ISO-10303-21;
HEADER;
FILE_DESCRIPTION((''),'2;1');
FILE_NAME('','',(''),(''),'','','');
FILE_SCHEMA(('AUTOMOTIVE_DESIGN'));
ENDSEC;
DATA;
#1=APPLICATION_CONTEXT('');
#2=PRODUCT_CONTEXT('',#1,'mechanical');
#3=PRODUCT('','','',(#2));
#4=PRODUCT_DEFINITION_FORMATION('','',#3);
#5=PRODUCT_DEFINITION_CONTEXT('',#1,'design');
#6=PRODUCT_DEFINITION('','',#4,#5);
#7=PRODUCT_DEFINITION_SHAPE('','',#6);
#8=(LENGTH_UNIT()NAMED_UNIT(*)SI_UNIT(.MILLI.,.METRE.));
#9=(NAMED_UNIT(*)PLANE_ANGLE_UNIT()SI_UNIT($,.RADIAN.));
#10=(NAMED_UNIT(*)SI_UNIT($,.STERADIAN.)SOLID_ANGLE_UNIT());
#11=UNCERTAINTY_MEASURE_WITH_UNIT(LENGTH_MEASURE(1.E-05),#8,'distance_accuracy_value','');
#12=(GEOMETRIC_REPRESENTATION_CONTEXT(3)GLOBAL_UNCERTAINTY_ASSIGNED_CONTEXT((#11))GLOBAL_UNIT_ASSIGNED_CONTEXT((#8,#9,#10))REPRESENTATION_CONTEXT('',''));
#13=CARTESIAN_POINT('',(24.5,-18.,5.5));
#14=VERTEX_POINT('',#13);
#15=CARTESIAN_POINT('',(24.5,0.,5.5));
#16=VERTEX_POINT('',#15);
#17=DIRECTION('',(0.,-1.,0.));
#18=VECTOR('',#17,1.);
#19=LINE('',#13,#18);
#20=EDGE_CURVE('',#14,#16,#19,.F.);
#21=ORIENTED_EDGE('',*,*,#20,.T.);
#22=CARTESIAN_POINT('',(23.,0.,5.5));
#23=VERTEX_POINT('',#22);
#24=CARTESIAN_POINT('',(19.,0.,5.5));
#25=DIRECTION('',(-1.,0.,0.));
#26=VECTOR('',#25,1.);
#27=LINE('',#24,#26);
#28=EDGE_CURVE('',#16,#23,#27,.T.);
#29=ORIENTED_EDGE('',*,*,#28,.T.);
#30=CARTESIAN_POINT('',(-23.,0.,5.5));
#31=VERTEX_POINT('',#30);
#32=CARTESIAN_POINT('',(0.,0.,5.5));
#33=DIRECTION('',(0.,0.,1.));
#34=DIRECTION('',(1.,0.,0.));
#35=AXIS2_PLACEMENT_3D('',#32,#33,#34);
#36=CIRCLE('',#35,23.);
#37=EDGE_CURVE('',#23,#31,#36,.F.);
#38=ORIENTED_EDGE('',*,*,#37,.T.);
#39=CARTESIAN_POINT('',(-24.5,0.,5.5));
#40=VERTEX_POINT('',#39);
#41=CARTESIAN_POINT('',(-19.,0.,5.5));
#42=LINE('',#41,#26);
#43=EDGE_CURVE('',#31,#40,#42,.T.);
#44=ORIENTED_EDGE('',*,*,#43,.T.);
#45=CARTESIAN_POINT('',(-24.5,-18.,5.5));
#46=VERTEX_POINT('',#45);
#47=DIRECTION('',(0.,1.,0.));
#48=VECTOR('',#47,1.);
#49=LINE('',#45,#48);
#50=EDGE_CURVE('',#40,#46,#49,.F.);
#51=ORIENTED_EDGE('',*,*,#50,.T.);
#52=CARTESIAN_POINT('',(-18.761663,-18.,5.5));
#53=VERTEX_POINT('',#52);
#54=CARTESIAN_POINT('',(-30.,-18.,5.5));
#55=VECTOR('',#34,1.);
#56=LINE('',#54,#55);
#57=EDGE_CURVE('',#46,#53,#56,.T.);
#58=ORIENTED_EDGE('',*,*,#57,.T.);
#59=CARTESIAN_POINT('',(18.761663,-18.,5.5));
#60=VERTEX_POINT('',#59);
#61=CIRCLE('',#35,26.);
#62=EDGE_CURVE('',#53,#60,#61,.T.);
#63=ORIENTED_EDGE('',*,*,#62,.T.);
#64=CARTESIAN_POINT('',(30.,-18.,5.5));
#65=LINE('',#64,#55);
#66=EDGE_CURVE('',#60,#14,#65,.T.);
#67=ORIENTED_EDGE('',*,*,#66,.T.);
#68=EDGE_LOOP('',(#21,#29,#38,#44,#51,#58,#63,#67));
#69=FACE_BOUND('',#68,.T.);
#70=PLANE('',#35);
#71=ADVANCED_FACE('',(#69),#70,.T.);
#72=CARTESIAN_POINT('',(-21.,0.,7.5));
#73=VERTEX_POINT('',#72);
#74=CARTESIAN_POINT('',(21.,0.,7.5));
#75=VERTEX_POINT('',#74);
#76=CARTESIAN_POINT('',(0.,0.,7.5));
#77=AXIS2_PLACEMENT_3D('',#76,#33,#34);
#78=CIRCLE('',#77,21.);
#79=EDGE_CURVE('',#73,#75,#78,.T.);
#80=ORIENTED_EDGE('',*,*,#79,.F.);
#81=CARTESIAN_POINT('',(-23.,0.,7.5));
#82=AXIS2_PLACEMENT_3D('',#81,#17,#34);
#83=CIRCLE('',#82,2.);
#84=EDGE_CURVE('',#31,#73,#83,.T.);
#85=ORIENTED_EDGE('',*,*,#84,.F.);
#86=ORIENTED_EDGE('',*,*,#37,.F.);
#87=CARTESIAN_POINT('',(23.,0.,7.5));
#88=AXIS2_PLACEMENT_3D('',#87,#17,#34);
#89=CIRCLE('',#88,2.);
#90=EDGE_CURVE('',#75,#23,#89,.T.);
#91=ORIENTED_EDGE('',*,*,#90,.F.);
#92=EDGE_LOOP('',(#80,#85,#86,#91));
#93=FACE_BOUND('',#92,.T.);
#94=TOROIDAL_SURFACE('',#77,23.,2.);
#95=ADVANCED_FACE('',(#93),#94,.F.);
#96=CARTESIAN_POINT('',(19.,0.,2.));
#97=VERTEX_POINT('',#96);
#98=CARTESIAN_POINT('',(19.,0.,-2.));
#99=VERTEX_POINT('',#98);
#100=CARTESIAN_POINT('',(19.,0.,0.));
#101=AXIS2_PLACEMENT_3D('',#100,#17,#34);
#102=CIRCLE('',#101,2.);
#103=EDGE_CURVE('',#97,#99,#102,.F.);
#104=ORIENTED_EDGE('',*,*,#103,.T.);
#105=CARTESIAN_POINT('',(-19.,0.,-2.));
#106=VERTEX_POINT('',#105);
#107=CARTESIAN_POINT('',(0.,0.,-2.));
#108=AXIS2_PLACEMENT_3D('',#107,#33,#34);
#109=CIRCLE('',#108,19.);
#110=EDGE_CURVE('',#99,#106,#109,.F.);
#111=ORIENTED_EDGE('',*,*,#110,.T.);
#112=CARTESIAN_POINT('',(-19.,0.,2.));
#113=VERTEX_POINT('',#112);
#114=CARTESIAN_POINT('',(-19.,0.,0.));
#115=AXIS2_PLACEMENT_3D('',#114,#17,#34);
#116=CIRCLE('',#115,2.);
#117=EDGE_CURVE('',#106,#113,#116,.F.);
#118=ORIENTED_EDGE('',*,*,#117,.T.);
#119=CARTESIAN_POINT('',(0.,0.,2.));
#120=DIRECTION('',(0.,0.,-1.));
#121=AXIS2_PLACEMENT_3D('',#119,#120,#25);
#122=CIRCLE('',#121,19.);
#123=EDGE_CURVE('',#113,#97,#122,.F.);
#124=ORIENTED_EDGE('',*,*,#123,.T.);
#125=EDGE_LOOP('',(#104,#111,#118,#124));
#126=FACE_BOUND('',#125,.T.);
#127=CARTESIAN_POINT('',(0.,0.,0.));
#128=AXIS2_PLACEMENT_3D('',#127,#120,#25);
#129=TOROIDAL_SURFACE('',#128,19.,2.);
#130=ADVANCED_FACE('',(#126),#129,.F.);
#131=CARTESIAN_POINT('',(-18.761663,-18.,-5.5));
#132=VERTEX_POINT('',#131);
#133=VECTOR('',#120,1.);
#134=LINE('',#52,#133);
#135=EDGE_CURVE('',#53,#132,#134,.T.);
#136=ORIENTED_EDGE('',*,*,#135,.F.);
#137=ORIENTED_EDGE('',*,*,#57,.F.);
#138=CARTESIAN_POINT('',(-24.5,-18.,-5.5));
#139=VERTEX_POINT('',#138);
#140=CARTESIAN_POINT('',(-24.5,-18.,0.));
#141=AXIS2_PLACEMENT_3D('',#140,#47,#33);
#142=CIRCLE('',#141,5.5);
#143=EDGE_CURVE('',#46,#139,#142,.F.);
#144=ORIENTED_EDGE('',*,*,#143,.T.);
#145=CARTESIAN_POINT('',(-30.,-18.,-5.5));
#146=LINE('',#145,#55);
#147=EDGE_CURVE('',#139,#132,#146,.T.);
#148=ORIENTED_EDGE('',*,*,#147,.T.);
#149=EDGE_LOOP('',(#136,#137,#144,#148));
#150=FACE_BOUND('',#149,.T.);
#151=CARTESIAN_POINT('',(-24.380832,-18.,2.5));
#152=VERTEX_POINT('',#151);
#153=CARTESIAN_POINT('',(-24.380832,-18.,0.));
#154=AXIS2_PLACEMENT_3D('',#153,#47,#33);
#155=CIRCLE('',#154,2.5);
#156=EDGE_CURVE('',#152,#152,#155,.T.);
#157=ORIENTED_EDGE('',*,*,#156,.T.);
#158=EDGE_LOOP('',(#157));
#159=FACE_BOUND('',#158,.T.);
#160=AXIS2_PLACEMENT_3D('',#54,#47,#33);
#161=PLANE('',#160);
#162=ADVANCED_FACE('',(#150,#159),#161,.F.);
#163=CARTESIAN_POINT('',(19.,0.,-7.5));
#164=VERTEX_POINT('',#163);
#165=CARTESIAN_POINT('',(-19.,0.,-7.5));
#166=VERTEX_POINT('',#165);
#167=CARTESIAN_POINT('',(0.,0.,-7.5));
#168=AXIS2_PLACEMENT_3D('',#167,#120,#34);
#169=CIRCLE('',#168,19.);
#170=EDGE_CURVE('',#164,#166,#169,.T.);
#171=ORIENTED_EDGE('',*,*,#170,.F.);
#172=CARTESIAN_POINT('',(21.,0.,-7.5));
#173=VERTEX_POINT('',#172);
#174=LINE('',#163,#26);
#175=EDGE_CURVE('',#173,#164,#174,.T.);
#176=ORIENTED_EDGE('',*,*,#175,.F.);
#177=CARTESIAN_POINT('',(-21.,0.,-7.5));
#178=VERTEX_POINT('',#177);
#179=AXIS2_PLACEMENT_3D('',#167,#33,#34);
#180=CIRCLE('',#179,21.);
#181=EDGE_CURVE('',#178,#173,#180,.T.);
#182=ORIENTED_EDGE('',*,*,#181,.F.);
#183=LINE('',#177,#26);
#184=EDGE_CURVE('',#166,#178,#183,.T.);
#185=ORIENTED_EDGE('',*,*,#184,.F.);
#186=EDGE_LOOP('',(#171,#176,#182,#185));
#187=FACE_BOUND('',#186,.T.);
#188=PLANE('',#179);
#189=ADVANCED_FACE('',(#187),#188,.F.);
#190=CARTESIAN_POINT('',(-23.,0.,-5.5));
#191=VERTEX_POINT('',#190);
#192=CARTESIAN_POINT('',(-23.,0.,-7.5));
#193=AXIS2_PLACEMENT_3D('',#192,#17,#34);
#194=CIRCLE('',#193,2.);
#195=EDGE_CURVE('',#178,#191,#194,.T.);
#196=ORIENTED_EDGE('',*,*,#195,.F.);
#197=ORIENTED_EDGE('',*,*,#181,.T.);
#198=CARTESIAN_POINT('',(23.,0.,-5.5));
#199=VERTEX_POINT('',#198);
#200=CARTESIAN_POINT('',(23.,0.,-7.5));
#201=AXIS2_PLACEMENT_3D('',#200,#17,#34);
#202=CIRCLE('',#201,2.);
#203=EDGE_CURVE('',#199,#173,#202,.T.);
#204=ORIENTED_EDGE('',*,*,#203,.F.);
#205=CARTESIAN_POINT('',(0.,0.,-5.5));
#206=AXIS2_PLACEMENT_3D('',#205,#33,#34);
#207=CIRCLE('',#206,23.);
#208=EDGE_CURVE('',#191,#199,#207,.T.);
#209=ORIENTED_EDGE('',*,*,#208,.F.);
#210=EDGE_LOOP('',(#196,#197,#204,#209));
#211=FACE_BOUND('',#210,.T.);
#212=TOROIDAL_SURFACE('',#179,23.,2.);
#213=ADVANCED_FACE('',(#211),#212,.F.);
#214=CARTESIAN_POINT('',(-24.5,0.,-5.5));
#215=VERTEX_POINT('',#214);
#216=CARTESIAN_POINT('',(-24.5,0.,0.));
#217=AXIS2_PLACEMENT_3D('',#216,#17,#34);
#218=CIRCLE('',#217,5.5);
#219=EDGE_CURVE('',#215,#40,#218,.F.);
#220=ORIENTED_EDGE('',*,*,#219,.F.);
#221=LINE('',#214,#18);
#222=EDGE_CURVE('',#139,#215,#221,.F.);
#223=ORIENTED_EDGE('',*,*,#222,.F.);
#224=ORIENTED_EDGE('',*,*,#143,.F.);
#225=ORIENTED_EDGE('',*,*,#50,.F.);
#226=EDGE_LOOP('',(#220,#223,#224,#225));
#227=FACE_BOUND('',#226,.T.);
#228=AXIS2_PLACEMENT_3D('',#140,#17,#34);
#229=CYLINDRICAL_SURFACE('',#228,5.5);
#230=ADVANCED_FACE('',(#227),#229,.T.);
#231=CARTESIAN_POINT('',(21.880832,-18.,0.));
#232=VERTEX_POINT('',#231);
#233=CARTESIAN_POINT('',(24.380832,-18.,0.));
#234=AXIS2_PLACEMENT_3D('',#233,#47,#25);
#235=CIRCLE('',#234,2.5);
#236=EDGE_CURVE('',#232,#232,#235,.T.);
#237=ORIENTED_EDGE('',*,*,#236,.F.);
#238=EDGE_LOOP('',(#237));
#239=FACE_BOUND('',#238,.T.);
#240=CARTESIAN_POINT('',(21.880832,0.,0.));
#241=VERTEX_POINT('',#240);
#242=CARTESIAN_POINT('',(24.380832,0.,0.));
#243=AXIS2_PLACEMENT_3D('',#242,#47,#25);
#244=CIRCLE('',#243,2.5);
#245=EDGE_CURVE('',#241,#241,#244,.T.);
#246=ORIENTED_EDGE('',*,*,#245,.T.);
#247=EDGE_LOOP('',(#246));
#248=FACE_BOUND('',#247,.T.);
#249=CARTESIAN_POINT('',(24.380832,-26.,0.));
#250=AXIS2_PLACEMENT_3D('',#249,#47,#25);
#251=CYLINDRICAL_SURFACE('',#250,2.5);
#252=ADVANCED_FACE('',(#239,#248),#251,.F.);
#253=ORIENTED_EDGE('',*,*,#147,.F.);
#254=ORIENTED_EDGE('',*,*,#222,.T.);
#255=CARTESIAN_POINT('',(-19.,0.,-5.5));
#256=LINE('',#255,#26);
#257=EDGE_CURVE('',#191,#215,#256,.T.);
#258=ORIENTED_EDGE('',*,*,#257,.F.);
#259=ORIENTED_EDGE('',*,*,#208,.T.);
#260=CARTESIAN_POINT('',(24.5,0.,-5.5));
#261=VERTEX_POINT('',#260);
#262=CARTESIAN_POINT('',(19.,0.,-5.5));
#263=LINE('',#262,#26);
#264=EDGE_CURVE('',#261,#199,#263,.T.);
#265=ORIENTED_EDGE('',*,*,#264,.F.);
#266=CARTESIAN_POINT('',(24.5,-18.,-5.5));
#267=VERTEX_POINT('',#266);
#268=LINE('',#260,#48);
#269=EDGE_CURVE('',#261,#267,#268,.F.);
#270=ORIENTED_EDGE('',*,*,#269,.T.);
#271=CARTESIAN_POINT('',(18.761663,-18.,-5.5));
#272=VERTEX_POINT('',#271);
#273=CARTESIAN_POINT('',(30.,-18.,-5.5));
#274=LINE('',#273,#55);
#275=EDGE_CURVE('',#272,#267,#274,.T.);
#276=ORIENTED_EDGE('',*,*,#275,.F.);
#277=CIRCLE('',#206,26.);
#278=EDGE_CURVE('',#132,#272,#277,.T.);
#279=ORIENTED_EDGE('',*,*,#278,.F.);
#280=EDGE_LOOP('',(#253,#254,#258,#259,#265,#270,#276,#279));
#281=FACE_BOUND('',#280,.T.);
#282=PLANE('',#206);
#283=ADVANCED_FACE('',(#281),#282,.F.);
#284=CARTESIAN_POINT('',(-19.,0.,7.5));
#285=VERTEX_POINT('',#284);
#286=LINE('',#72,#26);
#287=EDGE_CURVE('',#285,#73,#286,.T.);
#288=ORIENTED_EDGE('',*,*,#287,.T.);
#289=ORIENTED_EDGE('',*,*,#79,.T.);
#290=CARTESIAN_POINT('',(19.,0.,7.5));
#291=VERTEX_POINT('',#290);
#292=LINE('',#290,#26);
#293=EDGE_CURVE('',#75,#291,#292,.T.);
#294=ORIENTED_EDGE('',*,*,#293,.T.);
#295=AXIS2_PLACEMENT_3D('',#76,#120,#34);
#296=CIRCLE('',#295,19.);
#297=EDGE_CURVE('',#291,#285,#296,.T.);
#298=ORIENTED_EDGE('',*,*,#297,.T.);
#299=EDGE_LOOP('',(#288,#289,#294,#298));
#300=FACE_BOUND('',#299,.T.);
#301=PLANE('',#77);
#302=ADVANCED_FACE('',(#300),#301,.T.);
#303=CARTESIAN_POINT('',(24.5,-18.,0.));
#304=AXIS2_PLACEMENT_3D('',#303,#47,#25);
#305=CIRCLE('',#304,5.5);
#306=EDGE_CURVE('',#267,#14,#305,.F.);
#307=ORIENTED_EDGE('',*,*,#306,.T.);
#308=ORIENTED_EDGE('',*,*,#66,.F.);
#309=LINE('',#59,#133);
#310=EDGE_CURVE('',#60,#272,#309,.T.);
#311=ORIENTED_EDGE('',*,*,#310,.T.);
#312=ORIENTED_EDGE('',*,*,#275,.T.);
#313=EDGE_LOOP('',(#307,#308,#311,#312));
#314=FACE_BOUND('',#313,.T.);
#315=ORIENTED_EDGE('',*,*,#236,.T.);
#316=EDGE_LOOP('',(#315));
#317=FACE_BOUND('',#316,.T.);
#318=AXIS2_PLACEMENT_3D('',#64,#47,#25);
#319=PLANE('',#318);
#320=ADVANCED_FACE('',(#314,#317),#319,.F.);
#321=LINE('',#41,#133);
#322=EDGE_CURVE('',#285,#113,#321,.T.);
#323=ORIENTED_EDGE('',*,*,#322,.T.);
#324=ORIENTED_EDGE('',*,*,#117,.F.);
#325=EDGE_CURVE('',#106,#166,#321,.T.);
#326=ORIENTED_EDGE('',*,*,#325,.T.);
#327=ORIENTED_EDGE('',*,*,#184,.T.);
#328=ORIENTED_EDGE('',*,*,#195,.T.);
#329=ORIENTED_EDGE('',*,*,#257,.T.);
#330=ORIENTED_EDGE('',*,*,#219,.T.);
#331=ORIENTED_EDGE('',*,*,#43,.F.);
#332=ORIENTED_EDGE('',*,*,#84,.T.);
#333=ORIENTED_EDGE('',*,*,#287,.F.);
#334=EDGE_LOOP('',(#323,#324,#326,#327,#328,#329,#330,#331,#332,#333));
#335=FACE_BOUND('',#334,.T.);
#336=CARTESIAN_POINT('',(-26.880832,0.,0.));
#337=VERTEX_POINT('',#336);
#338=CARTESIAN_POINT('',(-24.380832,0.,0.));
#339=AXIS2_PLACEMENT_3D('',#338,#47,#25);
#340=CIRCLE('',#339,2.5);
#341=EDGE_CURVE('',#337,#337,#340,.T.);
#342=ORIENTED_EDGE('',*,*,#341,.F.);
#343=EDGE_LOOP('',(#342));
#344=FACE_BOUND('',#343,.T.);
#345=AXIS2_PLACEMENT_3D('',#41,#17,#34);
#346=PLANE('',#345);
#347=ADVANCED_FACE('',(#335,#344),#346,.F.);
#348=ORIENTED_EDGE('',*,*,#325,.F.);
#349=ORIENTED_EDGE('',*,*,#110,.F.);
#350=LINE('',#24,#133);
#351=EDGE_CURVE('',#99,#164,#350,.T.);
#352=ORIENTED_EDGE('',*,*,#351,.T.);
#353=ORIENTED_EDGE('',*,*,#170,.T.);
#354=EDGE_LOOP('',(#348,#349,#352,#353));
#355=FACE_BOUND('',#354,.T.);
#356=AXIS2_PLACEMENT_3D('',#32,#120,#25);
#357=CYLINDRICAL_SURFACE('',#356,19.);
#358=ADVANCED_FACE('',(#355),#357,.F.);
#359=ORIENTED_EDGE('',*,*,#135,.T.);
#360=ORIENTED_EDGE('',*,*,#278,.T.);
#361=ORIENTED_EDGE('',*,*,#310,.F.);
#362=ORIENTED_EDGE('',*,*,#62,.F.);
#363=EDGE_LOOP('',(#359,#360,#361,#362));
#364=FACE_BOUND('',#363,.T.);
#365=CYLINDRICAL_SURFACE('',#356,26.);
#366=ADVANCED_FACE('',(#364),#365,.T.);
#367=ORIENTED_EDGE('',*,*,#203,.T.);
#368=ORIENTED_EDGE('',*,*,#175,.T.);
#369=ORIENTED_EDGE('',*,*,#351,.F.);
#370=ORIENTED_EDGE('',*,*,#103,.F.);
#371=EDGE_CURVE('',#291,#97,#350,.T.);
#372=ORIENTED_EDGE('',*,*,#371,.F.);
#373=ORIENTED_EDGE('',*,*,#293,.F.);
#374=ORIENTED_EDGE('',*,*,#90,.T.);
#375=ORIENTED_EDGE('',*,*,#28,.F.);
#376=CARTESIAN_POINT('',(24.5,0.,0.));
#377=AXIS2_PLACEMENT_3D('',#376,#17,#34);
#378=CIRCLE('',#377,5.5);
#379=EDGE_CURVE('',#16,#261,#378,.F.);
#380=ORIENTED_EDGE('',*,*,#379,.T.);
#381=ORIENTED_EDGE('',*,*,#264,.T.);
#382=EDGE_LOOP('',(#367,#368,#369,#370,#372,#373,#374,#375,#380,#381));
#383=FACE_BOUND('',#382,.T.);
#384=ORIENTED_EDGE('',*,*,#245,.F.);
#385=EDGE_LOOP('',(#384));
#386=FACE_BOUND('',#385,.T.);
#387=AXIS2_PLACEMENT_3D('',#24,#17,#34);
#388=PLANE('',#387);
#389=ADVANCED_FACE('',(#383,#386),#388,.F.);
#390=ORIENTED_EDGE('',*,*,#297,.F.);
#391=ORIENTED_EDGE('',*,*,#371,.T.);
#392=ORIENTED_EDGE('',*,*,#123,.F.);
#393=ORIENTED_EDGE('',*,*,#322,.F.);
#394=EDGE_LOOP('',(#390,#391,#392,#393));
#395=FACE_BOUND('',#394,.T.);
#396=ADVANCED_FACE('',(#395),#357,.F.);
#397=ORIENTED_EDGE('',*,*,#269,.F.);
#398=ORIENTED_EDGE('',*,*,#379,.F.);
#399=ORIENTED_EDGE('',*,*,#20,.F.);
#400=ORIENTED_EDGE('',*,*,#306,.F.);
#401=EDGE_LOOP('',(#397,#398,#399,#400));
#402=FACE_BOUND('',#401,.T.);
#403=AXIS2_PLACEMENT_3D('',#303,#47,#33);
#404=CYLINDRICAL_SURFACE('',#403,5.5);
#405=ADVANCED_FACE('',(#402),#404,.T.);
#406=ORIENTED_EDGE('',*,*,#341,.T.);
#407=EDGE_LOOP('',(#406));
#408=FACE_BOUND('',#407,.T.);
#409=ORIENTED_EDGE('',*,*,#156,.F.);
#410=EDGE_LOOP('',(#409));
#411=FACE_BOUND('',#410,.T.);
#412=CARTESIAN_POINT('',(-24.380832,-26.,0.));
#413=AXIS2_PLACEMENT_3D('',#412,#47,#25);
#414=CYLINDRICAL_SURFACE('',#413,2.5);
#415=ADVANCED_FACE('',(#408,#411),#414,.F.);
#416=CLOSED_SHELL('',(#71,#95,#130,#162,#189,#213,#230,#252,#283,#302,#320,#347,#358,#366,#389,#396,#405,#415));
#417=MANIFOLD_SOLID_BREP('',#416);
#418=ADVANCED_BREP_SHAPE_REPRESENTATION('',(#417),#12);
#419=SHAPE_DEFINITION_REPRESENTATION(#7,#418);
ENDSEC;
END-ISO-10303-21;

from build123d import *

# Parameters (mm, degrees)
BOSS_EXTRUDE1_DEPTH = 5.5
BOSS_EXTRUDE2_DEPTH = 7.5
SKETCH4_R           = 2.5
CUT_EXTRUDE1_DEPTH  = 41.401113846
FILLET1_R           = 2
SKETCH5_R           = 2
FILLET2_RADIUS      = 5.5
FILLET2_LENGTH      = 18
FILLET3_RADIUS      = 5.5
FILLET3_LENGTH      = 18


with BuildPart() as part:
    # Sketch1 → Boss-Extrude1 (new, symmetric)
    with BuildSketch(Plane.XY):
        with BuildLine():
            Line((19, 0), (30, 0))
            Line((30, 0), (30, -18))
            Line((30, -18), (18.761663039, -18))
            ThreePointArc((18.761663039, -18), (0, -26), (-18.761663039, -18))
            Line((-18.761663039, -18), (-30, -18))
            Line((-30, -18), (-30, 0))
            Line((-30, 0), (-19, 0))
            ThreePointArc((-19, 0), (0, -19), (19, 0))
        make_face()
    extrude(amount=BOSS_EXTRUDE1_DEPTH, both=True)

    # Sketch3 → Boss-Extrude2 (add, symmetric)
    with BuildSketch(Plane.XY):
        with BuildLine():
            Line((-21, 0), (-19, 0))
            ThreePointArc((-19, 0), (0, -19), (19, 0))
            Line((19, 0), (21, 0))
            ThreePointArc((21, 0), (0, -21), (-21, 0))
        make_face()
    extrude(amount=BOSS_EXTRUDE2_DEPTH, both=True)

    # Sketch4 → Cut-Extrude1 (cut, through all)
    with BuildSketch(Plane(origin=(0, 0, 0), x_dir=(1, 0, 0), z_dir=(0, 1, 0))):
        with Locations(Location((-24.38083152, 0, 0), (0, 0, 180))):
            Circle(SKETCH4_R)
        with Locations(Location((24.38083152, 0, 0), (0, 0, 180))):
            Circle(SKETCH4_R)
    extrude(amount=-CUT_EXTRUDE1_DEPTH, mode=Mode.SUBTRACT)

    # Fillet1
    fillet1_edges = [part.edges().sort_by_distance(p)[0] for p in [
        (0, -21, -5.5),
        (0, -21, 5.5),
    ]]
    fillet(fillet1_edges, radius=FILLET1_R - 0.0001)  # a hair under: the kernel refuses the full size

    # Sketch5 → Cut-Revolve1 (revolve, cut)
    with BuildSketch(Plane(origin=(0, 0, 0), x_dir=(1, 0, 0), z_dir=(0, 1, 0))):
        with Locations((19, 0)):
            Circle(SKETCH5_R)
    revolve(axis=Axis((0, 0, -5.716287215), (0, 0, 1)), mode=Mode.SUBTRACT)

    # Fillet2: full round fillet: the end face becomes a half cylinder, R = half its width
    fillet2_face = Plane((30, -9, 0), x_dir=(0, 1, 0), z_dir=(1, 0, 0))  # on the end face: x along it, z out of the body
    fillet2_slab = fillet2_face.offset(-FILLET2_RADIUS / 2) * Box(FILLET2_LENGTH, 2 * FILLET2_RADIUS, FILLET2_RADIUS, mode=Mode.PRIVATE)  # the body's end, R deep
    fillet2_round = Plane((24.5, -9, 0), x_dir=(1, 0, 0), z_dir=(0, 1, 0)) * Cylinder(FILLET2_RADIUS, FILLET2_LENGTH, mode=Mode.PRIVATE)  # its axis R under the face
    add(fillet2_slab - fillet2_round, mode=Mode.SUBTRACT)

    # Fillet3: full round fillet: the end face becomes a half cylinder, R = half its width
    fillet3_face = Plane((-30, -9, 0), x_dir=(0, 1, 0), z_dir=(-1, 0, 0))  # on the end face: x along it, z out of the body
    fillet3_slab = fillet3_face.offset(-FILLET3_RADIUS / 2) * Box(FILLET3_LENGTH, 2 * FILLET3_RADIUS, FILLET3_RADIUS, mode=Mode.PRIVATE)  # the body's end, R deep
    fillet3_round = Plane((-24.5, -9, 0), x_dir=(-1, 0, 0), z_dir=(0, 1, 0)) * Cylinder(FILLET3_RADIUS, FILLET3_LENGTH, mode=Mode.PRIVATE)  # its axis R under the face
    add(fillet3_slab - fillet3_round, mode=Mode.SUBTRACT)


solid = part.part
